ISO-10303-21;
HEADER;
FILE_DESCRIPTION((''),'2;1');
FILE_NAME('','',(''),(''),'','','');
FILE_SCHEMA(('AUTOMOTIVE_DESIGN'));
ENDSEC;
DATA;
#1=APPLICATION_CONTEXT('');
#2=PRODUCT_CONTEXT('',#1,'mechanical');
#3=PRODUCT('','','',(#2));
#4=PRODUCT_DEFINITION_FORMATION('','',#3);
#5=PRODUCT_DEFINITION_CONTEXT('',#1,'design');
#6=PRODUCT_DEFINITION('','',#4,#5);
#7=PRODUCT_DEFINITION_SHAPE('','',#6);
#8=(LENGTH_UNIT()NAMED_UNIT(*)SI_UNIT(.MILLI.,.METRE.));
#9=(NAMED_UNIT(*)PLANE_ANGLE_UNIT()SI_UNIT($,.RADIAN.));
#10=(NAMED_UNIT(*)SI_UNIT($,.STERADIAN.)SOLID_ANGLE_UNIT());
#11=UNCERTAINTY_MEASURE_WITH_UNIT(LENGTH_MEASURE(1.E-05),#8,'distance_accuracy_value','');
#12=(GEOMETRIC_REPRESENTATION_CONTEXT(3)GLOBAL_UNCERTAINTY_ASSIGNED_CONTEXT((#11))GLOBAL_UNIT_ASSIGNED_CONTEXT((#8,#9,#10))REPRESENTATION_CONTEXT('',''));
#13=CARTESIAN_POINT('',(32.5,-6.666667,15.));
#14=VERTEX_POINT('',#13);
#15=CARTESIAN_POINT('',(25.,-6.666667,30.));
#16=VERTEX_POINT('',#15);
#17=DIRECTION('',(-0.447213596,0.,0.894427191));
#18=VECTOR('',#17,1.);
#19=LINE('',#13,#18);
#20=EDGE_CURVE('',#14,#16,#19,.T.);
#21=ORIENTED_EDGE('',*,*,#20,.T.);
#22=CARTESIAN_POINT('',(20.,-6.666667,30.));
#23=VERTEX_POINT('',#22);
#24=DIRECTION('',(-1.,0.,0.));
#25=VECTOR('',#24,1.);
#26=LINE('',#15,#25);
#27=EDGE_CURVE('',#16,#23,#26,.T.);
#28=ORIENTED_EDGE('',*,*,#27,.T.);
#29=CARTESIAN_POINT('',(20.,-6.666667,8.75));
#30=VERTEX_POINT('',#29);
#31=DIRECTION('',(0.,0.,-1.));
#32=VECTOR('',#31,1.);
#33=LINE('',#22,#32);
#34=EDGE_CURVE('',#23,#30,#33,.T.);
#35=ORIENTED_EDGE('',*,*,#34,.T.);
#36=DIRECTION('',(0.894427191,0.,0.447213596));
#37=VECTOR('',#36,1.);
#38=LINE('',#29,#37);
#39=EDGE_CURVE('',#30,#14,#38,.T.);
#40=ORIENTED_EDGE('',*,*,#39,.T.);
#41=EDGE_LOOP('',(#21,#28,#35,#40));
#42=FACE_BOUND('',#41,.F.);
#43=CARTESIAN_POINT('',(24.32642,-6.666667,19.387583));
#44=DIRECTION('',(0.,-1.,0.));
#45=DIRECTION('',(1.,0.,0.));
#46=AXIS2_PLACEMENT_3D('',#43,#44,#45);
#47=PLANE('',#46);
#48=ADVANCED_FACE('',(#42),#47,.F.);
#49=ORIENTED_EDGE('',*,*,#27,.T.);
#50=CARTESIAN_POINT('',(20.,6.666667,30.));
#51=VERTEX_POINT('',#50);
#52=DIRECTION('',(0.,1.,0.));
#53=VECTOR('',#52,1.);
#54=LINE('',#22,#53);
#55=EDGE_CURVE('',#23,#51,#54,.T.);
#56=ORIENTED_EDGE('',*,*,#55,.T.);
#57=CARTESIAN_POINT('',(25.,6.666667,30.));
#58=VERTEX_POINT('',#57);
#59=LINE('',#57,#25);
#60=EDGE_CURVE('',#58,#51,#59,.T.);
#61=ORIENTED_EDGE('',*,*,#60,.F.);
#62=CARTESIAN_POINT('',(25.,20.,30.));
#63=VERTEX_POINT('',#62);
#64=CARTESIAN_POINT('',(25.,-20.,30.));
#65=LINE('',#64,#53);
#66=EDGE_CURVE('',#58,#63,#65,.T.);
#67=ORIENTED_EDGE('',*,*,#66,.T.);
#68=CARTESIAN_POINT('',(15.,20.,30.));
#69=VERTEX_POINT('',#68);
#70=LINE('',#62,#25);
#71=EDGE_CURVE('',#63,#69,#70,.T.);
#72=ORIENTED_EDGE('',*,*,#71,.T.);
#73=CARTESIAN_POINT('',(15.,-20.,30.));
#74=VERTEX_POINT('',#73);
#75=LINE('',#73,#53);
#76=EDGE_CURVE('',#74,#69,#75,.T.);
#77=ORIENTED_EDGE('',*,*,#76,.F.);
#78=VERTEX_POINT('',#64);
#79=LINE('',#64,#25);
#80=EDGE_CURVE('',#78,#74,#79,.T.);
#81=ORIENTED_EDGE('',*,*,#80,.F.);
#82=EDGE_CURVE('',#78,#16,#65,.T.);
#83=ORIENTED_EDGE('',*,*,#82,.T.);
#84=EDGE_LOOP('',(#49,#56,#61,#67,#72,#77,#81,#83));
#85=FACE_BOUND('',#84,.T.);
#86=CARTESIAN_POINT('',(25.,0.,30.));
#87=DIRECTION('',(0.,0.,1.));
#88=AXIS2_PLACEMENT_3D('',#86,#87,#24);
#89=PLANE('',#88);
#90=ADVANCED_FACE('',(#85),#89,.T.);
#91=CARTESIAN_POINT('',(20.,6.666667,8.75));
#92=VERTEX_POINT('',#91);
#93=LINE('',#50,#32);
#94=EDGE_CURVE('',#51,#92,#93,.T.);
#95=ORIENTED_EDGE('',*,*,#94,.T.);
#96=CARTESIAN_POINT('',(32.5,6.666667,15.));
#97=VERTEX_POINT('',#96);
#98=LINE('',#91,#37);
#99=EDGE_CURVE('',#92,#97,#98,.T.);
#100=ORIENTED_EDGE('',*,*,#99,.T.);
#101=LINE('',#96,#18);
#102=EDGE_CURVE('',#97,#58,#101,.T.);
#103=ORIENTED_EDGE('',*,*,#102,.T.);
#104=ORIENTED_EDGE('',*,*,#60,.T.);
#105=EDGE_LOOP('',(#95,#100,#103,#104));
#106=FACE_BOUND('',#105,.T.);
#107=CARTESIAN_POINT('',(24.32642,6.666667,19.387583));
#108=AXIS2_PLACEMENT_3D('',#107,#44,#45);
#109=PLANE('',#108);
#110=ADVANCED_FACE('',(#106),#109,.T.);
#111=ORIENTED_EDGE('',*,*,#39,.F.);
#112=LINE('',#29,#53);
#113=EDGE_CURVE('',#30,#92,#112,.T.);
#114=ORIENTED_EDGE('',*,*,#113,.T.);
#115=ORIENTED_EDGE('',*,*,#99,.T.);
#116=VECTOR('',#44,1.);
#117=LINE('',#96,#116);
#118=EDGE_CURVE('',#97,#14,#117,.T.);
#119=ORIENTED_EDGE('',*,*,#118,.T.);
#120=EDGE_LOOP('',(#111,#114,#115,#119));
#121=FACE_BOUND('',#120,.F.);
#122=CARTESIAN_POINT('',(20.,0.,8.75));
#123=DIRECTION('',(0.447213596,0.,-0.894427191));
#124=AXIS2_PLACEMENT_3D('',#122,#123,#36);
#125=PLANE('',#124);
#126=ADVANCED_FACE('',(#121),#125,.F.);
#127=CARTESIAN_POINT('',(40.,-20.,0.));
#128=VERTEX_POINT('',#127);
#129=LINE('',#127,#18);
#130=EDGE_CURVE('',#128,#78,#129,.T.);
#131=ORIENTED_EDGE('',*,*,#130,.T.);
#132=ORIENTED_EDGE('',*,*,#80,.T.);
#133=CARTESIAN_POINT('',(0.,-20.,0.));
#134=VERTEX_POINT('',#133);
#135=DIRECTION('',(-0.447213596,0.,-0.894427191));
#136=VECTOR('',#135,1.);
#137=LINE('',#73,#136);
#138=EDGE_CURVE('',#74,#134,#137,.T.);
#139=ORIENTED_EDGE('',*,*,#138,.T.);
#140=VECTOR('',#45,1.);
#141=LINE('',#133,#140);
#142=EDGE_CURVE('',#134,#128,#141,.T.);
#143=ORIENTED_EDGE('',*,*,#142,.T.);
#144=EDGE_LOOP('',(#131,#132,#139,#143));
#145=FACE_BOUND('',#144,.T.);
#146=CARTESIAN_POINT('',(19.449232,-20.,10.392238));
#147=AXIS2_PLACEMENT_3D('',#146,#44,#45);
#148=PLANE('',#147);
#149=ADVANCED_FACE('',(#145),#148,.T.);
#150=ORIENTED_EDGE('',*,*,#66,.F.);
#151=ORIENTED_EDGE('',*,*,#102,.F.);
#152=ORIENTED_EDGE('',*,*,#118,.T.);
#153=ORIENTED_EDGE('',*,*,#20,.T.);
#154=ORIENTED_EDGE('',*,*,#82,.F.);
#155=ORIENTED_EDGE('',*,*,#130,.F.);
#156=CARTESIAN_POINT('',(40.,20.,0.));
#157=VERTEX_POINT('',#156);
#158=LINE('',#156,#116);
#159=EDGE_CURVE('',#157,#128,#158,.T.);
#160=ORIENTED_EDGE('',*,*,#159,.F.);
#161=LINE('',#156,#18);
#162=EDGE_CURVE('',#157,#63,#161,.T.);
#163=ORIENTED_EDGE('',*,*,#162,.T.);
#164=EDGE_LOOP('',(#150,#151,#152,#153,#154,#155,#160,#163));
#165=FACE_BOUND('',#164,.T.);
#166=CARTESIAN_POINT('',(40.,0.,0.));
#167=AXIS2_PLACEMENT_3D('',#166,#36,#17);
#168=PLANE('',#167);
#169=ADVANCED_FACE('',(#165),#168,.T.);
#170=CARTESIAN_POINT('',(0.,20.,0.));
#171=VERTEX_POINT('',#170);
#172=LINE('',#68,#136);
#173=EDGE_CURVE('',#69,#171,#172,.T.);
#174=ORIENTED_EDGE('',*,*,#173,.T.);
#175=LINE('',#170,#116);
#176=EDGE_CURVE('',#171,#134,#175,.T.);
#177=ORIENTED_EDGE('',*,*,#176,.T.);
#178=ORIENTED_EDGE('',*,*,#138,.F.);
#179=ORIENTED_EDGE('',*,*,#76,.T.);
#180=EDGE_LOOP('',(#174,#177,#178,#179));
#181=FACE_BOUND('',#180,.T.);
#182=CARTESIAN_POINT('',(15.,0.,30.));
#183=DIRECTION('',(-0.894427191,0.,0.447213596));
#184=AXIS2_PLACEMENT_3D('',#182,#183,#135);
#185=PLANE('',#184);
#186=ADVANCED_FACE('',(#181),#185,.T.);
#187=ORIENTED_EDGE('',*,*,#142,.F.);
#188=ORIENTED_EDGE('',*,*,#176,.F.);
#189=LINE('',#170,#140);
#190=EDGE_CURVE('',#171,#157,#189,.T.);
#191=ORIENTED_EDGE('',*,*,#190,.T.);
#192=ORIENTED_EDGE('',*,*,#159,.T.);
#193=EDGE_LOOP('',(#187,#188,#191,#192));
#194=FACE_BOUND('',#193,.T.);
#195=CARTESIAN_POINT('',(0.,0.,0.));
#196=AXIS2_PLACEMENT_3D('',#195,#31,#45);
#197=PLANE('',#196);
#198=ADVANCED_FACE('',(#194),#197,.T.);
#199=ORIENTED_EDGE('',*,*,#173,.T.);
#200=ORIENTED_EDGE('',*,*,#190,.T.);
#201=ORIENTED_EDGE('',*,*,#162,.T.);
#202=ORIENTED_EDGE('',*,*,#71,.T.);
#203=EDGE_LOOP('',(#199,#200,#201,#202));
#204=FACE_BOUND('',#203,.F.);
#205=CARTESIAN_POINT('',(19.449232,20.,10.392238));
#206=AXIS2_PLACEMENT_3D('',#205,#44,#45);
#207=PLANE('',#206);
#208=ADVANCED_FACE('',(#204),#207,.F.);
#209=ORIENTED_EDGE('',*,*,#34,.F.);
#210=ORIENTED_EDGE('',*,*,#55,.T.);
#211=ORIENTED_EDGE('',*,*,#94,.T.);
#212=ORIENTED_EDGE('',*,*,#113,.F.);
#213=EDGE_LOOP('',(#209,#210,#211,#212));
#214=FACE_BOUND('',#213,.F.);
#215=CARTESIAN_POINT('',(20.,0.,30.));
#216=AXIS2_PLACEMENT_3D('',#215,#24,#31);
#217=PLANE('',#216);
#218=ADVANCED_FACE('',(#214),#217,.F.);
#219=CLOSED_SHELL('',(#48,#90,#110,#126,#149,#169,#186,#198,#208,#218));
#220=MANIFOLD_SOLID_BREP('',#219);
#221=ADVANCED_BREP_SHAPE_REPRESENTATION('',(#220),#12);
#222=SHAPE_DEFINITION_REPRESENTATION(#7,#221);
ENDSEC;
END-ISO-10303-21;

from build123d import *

# Parameters (mm, degrees)
F1_DEPTH = 20
F2_DEPTH = 6.6666666667


# Not quite as in the source:
# - a feature names something its author has since deleted; it is built from what else it names


with BuildPart() as f1:
    # F0 (on Front) → F1 (new body, symmetric)
    with BuildSketch(Plane.XZ):
        Polygon((15, 30), (0, 0), (40, 0), (32.5, 15), (20, 8.75), (20, 30), align=None)
        Polygon((20, 8.75), (32.5, 15), (25, 30), (20, 30), align=None)
    extrude(amount=F1_DEPTH, both=True)

    # F0 (on Front) → F2 (cut, symmetric)
    with BuildSketch(Plane.XZ):
        Polygon((20, 8.75), (32.5, 15), (25, 30), (20, 30), align=None)
    extrude(amount=F2_DEPTH, both=True, mode=Mode.SUBTRACT)


solid = f1.part
